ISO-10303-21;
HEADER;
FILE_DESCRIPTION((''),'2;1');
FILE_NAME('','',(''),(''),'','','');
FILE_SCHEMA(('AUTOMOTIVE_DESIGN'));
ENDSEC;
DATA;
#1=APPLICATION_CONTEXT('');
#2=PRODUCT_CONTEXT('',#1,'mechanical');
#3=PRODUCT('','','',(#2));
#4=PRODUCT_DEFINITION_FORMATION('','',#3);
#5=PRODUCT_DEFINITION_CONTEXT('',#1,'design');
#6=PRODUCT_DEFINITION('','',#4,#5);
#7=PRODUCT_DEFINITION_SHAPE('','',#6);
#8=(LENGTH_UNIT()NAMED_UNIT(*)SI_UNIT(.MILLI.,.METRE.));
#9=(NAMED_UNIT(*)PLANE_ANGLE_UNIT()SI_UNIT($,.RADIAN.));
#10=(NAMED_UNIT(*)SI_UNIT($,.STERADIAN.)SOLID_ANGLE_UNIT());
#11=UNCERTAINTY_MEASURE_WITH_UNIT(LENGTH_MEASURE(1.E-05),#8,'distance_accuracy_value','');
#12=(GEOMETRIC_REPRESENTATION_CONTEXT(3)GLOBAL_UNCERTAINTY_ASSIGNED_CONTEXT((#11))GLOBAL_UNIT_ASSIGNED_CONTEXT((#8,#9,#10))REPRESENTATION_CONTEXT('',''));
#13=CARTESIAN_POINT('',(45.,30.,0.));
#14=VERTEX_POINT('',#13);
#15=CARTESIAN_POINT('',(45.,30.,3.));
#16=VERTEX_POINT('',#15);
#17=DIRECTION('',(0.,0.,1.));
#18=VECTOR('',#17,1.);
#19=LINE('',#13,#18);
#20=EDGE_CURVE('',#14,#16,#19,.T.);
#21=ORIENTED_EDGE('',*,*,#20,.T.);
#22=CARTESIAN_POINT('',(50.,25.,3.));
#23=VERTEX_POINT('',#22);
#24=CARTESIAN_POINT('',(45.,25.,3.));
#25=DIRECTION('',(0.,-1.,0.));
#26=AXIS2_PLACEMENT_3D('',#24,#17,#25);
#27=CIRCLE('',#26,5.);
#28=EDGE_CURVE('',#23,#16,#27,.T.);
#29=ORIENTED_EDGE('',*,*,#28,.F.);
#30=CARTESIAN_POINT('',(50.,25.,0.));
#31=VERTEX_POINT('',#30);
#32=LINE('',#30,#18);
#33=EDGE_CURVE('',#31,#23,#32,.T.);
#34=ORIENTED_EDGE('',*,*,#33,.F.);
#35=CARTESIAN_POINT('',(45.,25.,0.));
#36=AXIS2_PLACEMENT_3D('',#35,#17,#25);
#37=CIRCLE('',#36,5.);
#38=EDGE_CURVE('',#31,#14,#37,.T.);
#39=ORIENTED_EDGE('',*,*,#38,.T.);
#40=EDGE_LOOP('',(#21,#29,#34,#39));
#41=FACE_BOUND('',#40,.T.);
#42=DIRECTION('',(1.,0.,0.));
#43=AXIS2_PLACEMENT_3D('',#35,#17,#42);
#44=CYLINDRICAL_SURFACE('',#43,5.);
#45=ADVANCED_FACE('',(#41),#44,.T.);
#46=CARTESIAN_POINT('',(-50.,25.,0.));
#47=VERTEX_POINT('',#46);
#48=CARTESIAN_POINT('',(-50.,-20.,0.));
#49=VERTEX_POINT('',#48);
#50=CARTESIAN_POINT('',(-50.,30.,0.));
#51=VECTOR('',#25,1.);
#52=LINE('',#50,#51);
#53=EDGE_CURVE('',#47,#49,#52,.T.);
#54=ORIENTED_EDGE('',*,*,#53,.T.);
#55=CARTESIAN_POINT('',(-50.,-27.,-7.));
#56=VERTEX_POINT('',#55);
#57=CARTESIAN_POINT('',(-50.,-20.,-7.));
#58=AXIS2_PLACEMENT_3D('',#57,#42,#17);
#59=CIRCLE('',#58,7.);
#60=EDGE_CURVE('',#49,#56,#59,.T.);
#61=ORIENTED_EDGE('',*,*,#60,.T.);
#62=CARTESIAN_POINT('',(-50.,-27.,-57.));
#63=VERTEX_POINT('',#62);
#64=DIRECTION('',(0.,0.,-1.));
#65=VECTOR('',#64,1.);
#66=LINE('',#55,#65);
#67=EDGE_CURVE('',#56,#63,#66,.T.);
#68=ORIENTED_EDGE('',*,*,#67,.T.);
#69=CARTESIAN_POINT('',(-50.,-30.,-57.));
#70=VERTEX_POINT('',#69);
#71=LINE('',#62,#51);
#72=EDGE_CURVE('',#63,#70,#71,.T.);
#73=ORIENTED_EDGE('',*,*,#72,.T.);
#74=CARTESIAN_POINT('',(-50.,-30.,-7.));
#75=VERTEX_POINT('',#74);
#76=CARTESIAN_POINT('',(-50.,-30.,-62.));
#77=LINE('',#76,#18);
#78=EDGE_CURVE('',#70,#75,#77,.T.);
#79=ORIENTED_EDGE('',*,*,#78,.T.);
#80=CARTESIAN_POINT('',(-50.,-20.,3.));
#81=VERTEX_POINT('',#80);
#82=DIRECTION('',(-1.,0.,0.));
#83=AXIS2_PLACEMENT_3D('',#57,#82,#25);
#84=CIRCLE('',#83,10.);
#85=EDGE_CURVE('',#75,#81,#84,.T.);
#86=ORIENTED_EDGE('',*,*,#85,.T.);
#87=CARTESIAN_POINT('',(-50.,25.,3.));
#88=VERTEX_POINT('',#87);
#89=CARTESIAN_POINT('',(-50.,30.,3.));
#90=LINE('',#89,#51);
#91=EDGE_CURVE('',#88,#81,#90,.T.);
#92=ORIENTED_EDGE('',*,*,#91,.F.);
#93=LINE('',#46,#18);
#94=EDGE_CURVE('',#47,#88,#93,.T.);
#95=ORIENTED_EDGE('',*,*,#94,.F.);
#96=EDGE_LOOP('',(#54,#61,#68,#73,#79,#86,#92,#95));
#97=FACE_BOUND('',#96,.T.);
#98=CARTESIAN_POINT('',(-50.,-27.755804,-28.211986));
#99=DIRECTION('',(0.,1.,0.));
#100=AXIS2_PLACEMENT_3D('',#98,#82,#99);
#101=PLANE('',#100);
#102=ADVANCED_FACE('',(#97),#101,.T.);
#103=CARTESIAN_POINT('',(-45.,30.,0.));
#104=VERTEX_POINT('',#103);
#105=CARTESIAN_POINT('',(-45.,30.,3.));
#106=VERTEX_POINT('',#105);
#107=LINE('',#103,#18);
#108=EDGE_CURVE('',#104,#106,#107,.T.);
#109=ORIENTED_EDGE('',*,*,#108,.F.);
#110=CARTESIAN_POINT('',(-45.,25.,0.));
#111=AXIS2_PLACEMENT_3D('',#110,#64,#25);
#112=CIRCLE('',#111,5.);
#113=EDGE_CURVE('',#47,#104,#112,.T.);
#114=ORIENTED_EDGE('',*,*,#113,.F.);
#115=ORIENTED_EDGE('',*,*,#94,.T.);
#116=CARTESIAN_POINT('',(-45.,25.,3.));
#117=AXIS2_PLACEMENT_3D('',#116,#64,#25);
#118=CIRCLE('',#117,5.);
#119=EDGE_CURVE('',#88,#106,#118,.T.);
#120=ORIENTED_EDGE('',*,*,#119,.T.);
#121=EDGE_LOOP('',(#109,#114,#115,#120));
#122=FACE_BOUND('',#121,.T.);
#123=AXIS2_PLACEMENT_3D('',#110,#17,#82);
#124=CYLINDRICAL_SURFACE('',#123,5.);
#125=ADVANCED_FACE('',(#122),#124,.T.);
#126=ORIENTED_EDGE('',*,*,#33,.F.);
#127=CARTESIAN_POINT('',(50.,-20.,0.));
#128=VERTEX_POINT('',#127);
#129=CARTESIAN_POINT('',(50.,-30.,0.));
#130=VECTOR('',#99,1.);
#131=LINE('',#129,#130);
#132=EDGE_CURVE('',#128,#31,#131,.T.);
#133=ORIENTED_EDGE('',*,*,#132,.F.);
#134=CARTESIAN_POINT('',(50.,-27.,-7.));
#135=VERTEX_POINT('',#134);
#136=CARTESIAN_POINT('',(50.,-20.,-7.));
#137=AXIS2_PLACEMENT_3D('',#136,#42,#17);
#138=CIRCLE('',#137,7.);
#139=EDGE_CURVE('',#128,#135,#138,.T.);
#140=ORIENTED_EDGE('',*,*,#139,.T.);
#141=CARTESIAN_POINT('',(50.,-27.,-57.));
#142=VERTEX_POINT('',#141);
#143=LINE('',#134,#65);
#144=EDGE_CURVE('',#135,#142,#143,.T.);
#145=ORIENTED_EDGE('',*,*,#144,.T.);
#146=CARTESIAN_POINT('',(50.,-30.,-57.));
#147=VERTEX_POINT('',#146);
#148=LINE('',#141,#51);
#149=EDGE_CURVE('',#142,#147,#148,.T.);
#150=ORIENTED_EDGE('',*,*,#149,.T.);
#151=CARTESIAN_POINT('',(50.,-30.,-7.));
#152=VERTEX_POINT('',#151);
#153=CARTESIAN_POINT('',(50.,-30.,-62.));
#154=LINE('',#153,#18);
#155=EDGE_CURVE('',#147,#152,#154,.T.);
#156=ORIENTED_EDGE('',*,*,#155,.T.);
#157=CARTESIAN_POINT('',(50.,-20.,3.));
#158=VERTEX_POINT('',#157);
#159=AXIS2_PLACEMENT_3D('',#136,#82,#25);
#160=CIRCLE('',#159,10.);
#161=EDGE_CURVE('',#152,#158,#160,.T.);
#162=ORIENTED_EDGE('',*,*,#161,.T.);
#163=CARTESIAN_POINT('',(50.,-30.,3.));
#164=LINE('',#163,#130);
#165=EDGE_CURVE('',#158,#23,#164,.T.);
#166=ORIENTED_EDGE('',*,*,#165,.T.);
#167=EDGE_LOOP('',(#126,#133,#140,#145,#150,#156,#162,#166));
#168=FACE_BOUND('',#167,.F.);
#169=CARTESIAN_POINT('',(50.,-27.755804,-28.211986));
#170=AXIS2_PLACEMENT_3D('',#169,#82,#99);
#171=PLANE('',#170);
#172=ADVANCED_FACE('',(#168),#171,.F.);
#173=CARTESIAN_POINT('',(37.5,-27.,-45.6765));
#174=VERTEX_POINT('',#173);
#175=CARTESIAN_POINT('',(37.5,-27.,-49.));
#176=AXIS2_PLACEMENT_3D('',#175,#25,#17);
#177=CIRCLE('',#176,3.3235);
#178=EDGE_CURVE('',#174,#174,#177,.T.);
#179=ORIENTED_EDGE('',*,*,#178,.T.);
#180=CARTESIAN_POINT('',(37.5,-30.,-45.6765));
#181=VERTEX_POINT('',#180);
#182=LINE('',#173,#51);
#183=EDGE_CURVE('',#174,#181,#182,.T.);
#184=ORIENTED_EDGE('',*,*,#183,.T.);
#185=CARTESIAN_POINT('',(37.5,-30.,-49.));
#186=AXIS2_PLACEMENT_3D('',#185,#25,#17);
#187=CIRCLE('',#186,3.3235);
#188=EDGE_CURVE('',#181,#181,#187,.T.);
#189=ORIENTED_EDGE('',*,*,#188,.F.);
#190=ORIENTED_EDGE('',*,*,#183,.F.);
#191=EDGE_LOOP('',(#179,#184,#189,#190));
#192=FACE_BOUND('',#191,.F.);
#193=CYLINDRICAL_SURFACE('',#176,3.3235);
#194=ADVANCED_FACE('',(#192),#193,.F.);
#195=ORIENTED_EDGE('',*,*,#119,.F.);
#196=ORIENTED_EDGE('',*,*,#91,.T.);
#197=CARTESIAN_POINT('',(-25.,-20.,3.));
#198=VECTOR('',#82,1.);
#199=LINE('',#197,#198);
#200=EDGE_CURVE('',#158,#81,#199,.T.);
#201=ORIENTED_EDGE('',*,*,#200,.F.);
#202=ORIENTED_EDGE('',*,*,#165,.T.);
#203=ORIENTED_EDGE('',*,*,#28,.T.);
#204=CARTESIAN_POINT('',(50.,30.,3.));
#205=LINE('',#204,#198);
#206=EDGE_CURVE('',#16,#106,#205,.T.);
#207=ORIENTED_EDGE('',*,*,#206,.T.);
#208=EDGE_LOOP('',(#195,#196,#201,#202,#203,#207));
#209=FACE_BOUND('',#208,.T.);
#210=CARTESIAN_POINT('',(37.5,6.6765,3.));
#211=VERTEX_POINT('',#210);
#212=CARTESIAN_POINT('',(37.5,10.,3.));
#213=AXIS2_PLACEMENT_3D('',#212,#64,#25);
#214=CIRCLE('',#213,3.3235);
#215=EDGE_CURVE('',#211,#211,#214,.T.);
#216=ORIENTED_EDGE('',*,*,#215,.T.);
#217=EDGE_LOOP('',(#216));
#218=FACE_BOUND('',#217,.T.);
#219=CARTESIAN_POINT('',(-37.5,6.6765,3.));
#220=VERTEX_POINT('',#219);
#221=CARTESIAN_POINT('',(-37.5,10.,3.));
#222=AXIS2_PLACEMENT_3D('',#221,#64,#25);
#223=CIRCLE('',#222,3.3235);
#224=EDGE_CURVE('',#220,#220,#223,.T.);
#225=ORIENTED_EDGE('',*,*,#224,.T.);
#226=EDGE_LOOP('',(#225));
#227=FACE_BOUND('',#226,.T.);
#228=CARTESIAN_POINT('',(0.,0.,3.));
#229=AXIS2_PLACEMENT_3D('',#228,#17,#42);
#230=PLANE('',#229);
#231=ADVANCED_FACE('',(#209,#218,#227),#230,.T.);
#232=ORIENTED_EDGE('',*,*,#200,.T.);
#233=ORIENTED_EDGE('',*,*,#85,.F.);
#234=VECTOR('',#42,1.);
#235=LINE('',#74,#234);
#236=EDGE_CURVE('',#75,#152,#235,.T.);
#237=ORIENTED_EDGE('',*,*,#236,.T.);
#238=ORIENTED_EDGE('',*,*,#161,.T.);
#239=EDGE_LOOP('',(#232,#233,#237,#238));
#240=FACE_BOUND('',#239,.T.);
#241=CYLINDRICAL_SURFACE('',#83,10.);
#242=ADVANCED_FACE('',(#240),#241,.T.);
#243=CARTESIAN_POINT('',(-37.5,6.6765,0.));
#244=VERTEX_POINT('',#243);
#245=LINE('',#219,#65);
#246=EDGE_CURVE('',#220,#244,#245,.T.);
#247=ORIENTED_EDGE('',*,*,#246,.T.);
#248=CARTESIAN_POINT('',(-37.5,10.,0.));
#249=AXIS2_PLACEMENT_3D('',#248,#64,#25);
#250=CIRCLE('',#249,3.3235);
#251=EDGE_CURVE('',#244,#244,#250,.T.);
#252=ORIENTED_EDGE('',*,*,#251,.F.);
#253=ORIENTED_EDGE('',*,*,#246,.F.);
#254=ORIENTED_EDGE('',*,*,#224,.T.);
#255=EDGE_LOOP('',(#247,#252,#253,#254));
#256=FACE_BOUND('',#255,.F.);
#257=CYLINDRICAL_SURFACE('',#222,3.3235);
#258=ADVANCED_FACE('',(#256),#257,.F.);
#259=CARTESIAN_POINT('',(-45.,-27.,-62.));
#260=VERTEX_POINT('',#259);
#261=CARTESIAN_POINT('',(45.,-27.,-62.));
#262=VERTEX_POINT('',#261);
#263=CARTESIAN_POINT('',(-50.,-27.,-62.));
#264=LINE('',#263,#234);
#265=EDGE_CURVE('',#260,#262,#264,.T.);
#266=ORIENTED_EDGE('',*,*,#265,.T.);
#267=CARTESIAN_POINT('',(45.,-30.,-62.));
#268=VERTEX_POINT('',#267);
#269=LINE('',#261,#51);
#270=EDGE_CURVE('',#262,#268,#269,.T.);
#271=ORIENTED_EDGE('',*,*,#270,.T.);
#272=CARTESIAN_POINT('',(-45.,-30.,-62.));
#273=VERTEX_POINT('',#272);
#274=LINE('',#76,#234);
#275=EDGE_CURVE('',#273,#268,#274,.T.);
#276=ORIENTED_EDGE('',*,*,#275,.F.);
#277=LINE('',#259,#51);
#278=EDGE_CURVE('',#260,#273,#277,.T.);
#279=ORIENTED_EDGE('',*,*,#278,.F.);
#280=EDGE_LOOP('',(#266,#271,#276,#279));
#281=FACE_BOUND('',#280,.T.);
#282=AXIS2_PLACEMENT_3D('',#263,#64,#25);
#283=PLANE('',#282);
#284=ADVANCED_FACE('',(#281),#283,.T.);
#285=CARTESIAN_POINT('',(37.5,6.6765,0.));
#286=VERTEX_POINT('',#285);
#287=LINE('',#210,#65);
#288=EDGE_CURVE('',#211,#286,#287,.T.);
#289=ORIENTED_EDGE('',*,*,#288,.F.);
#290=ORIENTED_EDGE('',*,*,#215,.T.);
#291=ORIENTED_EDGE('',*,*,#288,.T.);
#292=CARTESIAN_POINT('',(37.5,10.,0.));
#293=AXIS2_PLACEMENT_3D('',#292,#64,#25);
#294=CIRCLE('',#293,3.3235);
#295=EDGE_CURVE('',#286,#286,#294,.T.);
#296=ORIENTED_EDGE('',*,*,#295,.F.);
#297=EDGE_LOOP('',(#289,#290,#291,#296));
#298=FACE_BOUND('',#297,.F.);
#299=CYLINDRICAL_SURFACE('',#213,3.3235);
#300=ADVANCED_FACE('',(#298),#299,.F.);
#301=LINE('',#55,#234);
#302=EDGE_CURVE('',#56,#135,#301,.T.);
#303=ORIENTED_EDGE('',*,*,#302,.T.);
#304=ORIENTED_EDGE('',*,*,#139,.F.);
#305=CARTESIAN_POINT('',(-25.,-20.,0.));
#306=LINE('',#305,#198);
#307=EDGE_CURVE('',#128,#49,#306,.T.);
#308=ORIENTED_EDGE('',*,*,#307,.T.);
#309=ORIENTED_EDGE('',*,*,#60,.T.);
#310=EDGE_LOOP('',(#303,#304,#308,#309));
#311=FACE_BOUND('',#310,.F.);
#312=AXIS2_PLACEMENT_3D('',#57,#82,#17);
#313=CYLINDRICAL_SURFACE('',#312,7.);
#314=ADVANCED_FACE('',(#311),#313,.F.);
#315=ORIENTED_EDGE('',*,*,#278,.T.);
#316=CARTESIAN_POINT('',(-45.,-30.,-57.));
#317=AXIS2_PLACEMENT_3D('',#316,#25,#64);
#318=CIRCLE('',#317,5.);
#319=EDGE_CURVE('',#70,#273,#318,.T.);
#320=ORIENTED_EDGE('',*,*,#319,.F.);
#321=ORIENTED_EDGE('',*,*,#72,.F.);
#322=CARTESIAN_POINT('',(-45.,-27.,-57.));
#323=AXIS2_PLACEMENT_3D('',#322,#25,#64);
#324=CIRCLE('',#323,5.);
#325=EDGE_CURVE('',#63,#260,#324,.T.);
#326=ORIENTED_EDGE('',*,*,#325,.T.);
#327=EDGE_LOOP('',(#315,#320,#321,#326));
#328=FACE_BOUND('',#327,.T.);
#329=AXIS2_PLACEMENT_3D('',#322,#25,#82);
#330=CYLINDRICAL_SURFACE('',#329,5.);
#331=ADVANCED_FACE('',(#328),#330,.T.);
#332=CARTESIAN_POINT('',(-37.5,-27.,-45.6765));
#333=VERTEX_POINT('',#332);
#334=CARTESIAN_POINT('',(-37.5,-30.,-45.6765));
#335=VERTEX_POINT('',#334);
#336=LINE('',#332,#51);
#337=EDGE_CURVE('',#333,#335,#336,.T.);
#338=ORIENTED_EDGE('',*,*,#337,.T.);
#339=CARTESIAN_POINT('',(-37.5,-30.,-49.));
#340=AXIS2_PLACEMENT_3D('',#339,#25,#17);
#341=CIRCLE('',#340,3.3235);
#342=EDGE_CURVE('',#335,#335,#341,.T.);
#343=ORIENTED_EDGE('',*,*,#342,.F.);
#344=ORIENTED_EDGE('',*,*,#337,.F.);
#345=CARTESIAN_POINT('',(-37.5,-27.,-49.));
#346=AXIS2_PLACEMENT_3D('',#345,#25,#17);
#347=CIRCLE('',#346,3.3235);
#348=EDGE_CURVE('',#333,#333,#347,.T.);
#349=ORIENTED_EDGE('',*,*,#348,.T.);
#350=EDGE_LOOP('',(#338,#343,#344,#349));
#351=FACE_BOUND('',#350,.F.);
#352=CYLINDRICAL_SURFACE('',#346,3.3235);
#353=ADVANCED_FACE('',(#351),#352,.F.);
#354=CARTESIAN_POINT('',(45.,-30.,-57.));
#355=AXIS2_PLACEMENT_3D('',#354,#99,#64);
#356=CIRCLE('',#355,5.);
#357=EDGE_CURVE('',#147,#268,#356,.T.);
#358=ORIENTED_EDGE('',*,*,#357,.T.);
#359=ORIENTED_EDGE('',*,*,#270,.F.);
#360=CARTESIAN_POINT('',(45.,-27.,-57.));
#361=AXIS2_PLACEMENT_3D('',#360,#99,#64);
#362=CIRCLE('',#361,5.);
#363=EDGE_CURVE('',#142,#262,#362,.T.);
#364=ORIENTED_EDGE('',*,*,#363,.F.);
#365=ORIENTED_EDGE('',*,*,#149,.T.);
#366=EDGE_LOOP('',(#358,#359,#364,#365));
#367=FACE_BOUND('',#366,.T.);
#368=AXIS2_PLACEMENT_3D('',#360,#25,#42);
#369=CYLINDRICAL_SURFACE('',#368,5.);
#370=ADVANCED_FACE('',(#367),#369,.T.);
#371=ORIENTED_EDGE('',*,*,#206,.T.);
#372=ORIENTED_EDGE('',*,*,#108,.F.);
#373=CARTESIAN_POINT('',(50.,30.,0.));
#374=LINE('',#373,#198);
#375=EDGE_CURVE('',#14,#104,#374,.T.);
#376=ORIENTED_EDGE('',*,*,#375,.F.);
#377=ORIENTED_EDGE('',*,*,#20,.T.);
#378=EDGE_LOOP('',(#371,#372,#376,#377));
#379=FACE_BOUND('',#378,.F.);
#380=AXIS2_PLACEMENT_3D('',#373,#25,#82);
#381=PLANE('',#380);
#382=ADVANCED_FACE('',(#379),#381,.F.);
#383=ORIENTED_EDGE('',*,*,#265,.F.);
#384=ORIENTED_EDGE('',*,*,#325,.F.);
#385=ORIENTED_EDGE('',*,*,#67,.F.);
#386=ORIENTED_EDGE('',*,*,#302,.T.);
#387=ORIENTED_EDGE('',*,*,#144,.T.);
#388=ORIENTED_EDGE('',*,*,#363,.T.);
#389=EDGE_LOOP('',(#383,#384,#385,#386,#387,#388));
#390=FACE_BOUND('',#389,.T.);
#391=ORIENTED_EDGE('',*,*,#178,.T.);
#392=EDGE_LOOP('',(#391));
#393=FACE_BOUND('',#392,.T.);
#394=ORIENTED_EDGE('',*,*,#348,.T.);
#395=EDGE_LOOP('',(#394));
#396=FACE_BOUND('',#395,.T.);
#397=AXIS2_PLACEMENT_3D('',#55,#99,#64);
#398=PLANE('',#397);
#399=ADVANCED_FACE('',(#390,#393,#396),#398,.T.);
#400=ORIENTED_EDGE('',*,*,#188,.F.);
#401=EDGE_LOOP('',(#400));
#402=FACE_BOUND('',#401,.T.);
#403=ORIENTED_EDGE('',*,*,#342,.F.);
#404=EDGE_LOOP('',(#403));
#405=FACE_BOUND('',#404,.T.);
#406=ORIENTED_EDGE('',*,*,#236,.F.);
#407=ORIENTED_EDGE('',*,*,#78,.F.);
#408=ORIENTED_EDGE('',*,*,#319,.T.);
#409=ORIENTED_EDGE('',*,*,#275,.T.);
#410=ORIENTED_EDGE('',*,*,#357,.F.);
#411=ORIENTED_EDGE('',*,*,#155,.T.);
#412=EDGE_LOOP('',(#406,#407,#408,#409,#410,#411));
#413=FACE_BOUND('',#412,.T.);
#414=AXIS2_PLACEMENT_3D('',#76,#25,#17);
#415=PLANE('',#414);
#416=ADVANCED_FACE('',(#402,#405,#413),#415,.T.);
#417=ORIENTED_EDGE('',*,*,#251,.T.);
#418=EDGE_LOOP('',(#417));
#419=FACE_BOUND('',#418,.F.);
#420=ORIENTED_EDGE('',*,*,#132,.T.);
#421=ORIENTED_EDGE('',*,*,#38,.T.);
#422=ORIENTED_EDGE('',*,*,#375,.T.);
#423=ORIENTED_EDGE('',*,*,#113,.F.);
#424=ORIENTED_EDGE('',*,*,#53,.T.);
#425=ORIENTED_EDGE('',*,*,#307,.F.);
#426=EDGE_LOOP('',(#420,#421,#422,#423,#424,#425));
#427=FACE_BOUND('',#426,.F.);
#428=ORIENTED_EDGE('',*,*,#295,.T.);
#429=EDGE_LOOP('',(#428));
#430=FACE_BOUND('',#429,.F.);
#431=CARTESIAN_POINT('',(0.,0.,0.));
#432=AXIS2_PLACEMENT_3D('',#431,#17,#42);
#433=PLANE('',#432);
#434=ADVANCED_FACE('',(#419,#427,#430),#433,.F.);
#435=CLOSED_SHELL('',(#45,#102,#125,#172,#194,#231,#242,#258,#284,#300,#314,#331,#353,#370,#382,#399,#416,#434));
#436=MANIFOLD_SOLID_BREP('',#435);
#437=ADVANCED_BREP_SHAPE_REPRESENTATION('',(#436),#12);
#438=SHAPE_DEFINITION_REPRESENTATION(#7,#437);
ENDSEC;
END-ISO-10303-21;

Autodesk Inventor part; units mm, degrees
ref_plane "YZ Plane" through (0, 0, 0) normal (1, 0, 0) x (0, 1, 0)
ref_plane "XZ Plane" through (0, 0, 0) normal (0, 1, 0) x (-1, 0, 0)
ref_plane "XY Plane" through (0, 0, 0) normal (0, 0, 1) x (1, 0, 0)
sketch "Sketch1" plane through (0, 0, 0) normal (0, 0, 1) x (1, 0, 0)
  line L0 (-50, -30) -> (50, -30)
  line L1 (50, -30) -> (50, 30)
  line L2 (50, 30) -> (-50, 30)
  line L3 (-50, 30) -> (-50, -30)
  line L4 (-50, -30) -> (50, 30) construction
  line L5 (50, -30) -> (-50, 30) construction
  point P0 (0, 0)
  dimension "d0" = 60
  dimension "d1" = 100
extrude "Extrusion1" add sketch "Sketch1" along normal blind 3
sketch "Sketch2" plane through (-50, -27, 3) normal (0, -1, 0) x (1, 0, 0)
  line L0 (100, 0) -> (0, 0)
  line L1 (0, 0) -> (0, -65)
  line L2 (0, -65) -> (100, -65)
  line L3 (100, -65) -> (100, 0)
edge flange "Flange1" height 65 angle 90 thickness 3 bend radius 7 thickness toward (0, -1, 0) relief tear relief width 3 relief depth 1.5 edges at (0, -30, 0) wall of the first edge with corners at (50, -27, 3) (-50, -27, 3) (-50, -27, -62) (50, -27, -62)
bend "Bend1"
corner "Corner1"
sketch "Sketch3" plane through (0, 0, 3) normal (0, 0, 1) x (1, 0, 0)
  line L0 (50, 30) -> (-50, 30) projected
  point P0 (0, 0)
  point P1 (-37.5, 10)
  point P2 (37.5, 10)
  dimension "d15" = 20
  dimension "d16" = 37.5
  dimension "d17" = 75
hole "Hole1" at (-37.5, 10, 3) at (37.5, 10, 3) direction (0, 0, -1) diameter 6.647 end through all thread size "M8x1.25" class "6H" standard "ANSI Metric M Profile"
sketch "Sketch4" plane through (-50, -27, -62) normal (0, 1, 0) x (1, 0, 0)
  line L0 (0, -65) -> (100, -65) projected
  line L1 (50, -65) -> (50, 0) construction
  line L2 (100, 0) -> (0, 0) projected
  point P0 (50, -62)
  point P1 (87.5, -13)
  point P2 (12.5, -13)
  dimension "d26" = 37.5
  dimension "d27" = 75
  dimension "d36" = 52
hole "Hole2" at (37.5, -27, -49) at (-37.5, -27, -49) direction (0, -1, 0) diameter 6.647 end through all thread size "M8x1.25" class "6H" standard "ANSI Metric M Profile"
fillet "Fillet1" radius 5 4 edges at (-50, 30, 1.5) (50, 30, 1.5) (-50, -28.5, -62) (50, -28.5, -62)
equation "\"d1\" = Width"
equation "\"d4\" = Thickness"
equation "\"d5\" = BendReliefWidth"
equation "\"d6\" = BendReliefDepth"
equation "\"d7\" = MinimumRemnant"
equation "\"d8\" = TransitionRadius"
equation "\"d12\" = CornerReliefSize"
equation "\"d13\" = GapSize"
equation "\"d14\" = JacobiRadiusSize"
equation "\"d16\" = 0.5 * Bolt_Width"
equation "\"d17\" = Bolt_Width"
equation "\"d26\" = 0.5 * Bolt_Width"
equation "\"d27\" = Bolt_Width"
equation "\"BendRadius\" = Thickness"
equation "\"BendReliefWidth\" = Thickness"
equation "\"BendReliefDepth\" = 0.5 * Thickness"
equation "\"CornerReliefSize\" = 4 * Thickness"
equation "\"MinimumRemnant\" = 2 * Thickness"
equation "\"TransitionRadius\" = BendRadius"
equation "\"JacobiRadiusSize\" = BendRadius"
equation "\"GapSize\" = Thickness"
equation "\"Width\" = 100"
equation "\"Thickness\" = 3"
equation "\"Bolt_Width\" = 75"
properties part number "Clamp_Plate" material "Steel, Carbon"
